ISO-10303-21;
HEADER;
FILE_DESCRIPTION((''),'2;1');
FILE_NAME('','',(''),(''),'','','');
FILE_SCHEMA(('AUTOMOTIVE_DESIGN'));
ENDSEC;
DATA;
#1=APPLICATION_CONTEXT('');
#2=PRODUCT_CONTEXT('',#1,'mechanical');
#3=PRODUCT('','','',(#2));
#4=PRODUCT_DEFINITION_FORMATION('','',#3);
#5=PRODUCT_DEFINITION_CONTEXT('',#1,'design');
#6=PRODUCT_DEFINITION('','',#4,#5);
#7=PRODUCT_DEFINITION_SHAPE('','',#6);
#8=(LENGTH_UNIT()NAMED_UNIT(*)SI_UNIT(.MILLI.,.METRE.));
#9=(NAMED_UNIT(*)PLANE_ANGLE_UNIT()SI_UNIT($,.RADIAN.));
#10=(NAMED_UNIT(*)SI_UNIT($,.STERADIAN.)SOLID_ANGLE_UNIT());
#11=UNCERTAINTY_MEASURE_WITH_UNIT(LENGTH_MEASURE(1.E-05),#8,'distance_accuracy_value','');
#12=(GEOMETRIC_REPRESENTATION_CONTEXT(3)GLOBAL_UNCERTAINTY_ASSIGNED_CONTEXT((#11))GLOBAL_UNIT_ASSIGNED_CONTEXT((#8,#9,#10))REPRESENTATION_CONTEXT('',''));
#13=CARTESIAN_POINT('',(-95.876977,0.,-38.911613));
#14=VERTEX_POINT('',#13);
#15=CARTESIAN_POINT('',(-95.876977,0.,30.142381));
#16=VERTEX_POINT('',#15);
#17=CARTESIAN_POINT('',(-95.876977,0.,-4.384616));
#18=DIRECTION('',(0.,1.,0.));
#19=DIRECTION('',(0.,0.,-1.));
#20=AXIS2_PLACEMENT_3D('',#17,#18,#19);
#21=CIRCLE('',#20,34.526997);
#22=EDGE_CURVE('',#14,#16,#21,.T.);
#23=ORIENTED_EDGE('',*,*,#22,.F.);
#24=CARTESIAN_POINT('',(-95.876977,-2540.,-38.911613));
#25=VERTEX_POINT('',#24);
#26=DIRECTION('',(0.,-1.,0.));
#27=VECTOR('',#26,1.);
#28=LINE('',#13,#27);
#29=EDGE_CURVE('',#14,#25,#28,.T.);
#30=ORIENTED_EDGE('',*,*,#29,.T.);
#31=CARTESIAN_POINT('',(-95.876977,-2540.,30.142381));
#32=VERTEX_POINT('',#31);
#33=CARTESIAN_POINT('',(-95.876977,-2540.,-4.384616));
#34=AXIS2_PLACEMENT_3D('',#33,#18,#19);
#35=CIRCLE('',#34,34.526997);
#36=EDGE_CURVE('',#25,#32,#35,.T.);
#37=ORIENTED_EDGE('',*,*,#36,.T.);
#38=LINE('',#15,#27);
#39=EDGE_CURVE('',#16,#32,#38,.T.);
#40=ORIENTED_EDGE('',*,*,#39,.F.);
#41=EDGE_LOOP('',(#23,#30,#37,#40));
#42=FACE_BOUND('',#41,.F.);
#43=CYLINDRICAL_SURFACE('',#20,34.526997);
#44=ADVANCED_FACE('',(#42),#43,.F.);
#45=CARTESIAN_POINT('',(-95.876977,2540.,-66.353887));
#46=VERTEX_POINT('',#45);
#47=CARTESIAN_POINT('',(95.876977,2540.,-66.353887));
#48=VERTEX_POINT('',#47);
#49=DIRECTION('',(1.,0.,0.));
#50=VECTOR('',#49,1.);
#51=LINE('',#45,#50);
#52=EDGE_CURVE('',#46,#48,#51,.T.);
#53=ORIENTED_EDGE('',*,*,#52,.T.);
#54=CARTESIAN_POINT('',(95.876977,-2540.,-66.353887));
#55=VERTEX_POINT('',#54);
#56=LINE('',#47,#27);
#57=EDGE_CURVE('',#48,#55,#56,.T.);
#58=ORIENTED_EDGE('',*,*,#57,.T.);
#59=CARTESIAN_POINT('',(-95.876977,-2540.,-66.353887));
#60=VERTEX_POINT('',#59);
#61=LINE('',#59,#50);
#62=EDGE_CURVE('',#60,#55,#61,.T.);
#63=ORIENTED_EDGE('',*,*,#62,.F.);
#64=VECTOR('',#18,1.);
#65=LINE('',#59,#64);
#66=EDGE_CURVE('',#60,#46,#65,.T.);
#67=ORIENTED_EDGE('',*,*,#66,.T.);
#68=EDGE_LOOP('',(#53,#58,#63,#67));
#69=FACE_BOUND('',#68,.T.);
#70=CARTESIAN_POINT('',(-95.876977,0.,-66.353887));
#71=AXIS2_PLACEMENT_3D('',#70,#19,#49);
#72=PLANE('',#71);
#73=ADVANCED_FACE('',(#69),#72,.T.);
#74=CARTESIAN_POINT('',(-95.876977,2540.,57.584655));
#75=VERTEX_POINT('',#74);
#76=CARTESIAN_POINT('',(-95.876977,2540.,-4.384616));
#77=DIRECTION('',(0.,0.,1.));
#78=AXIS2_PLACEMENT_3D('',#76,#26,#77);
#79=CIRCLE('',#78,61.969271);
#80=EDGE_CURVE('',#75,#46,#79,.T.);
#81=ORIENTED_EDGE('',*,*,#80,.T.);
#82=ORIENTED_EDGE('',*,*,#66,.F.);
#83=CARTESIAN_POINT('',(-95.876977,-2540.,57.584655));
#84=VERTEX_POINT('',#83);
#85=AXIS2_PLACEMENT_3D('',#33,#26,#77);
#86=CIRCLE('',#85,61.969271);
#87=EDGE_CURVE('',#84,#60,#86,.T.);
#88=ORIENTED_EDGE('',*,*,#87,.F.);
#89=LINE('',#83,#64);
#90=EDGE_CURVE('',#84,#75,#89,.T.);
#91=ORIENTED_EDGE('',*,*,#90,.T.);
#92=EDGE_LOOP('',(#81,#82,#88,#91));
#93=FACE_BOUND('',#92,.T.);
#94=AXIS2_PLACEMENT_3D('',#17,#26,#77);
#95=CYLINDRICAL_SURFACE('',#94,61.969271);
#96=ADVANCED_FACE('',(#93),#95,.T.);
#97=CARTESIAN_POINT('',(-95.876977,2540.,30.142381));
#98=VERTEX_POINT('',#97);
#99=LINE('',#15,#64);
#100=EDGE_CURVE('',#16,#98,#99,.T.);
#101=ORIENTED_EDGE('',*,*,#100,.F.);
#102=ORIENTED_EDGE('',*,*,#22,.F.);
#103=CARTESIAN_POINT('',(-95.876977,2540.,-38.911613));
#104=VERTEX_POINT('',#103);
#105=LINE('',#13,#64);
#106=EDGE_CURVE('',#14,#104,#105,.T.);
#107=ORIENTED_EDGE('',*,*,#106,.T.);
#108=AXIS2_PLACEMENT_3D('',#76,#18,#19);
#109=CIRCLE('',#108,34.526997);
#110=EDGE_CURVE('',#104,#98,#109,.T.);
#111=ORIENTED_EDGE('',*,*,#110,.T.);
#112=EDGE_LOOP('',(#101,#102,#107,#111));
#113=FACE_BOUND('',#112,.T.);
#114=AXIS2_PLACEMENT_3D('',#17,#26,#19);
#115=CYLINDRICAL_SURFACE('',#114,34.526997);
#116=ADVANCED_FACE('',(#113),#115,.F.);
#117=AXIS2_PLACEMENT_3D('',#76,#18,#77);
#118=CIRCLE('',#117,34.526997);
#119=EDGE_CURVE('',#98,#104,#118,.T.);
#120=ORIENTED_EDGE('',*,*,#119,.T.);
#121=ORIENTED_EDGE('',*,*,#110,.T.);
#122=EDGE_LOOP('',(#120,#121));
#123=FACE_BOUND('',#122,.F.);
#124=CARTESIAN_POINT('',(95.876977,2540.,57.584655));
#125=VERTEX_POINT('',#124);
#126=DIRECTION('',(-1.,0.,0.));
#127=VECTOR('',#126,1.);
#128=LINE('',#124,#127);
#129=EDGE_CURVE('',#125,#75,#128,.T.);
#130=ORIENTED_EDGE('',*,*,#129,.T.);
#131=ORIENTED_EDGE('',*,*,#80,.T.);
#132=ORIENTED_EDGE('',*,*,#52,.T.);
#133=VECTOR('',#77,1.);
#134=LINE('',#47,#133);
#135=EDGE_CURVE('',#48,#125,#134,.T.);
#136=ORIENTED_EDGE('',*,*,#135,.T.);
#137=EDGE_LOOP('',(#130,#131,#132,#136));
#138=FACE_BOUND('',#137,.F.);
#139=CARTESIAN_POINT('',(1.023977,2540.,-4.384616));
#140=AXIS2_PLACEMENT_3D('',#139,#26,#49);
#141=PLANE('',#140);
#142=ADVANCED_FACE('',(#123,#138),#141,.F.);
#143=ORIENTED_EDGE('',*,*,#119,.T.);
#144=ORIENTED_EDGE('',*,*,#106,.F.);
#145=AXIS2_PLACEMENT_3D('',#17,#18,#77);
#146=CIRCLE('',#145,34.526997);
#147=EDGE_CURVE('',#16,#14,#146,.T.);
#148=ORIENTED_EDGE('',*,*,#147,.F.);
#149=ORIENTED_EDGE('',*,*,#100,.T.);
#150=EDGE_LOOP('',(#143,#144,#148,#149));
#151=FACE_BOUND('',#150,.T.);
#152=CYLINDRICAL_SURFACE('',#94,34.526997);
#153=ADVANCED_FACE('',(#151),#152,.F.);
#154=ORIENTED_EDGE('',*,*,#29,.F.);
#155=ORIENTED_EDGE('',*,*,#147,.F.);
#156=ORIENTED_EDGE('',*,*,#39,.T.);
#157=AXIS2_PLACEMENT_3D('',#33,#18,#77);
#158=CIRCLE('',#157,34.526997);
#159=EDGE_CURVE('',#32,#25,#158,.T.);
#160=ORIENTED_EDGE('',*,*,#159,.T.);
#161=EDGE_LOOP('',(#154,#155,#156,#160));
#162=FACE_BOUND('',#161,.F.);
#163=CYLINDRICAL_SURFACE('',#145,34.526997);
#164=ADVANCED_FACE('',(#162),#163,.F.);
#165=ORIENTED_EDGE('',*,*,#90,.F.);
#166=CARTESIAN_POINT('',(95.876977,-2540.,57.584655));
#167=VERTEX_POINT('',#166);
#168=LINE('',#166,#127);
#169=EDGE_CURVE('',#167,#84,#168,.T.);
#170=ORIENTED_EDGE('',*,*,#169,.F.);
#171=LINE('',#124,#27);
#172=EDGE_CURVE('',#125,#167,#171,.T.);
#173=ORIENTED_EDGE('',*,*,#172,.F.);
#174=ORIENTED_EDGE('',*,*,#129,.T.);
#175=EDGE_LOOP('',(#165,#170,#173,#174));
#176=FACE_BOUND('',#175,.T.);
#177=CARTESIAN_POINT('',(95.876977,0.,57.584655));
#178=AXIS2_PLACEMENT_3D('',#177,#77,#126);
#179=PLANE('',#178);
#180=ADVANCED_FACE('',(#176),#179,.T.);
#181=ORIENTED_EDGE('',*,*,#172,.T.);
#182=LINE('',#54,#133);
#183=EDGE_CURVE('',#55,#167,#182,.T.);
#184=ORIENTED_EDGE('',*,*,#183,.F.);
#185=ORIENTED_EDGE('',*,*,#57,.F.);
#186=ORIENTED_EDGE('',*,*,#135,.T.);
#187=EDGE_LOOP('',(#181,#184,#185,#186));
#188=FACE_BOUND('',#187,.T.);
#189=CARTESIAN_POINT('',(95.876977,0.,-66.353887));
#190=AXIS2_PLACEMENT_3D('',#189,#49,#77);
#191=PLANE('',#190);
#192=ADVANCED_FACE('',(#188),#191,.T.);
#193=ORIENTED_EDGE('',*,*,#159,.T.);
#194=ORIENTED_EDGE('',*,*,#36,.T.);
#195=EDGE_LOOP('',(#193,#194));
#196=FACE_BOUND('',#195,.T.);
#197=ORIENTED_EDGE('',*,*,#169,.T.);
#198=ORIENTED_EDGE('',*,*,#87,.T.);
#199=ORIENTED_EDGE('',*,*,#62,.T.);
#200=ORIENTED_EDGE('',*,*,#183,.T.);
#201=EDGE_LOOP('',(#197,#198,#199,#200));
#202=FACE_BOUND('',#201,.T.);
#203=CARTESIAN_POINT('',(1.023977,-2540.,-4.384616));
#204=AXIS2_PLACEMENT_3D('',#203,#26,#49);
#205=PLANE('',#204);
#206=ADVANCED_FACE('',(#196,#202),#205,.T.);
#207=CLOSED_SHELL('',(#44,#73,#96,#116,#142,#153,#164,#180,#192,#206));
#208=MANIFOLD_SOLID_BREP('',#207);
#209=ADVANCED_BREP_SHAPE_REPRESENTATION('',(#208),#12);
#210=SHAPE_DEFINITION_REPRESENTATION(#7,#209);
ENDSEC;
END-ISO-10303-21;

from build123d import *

# Parameters (mm, degrees)
F1_DEPTH = 2540


with BuildPart() as f1:
    # F0 (on Front) → F1 (new body, symmetric)
    with BuildSketch(Plane.XZ):
        with BuildLine():
            ThreePointArc((-33.9077054523, -4.3846159242), (-52.0580848188, -48.2035079531), (-95.8769768476, -66.3538873196))
            Line((-95.8769768476, -66.3538873196), (95.8769768476, -66.3538873196))
            Line((95.8769768476, -66.3538873196), (95.8769768476, 57.5846554711))
            Line((95.8769768476, 57.5846554711), (-95.8769768476, 57.5846554711))
            ThreePointArc((-95.8769768476, 57.5846554711), (-52.0580848188, 39.4342761046), (-33.9077054523, -4.3846159242))
        make_face()
        with BuildLine():
            ThreePointArc((-95.8769768476, 57.5846554711), (-157.846248243, -4.3846159242), (-95.8769768476, -66.3538873196))
            Line((-95.8769768476, -66.3538873196), (-95.8769768476, -38.9116128696))
            ThreePointArc((-95.8769768476, -38.9116128696), (-130.4039737931, -4.3846159242), (-95.8769768476, 30.1423810212))
            Line((-95.8769768476, 30.1423810212), (-95.8769768476, 57.5846554711))
        make_face()
        with BuildLine():
            Line((-95.8769768476, -38.9116128696), (-95.8769768476, -66.3538873196))
            ThreePointArc((-95.8769768476, -66.3538873196), (-52.0580848188, -48.2035079531), (-33.9077054523, -4.3846159242))
            ThreePointArc((-33.9077054523, -4.3846159242), (-52.0580848188, 39.4342761046), (-95.8769768476, 57.5846554711))
            Line((-95.8769768476, 57.5846554711), (-95.8769768476, 30.1423810212))
            ThreePointArc((-95.8769768476, 30.1423810212), (-71.4627031735, 20.0296577499), (-61.3499799022, -4.3846159242))
            ThreePointArc((-61.3499799022, -4.3846159242), (-71.4627031735, -28.7988895983), (-95.8769768476, -38.9116128696))
        make_face()
    extrude(amount=F1_DEPTH, both=True)


solid = f1.part
